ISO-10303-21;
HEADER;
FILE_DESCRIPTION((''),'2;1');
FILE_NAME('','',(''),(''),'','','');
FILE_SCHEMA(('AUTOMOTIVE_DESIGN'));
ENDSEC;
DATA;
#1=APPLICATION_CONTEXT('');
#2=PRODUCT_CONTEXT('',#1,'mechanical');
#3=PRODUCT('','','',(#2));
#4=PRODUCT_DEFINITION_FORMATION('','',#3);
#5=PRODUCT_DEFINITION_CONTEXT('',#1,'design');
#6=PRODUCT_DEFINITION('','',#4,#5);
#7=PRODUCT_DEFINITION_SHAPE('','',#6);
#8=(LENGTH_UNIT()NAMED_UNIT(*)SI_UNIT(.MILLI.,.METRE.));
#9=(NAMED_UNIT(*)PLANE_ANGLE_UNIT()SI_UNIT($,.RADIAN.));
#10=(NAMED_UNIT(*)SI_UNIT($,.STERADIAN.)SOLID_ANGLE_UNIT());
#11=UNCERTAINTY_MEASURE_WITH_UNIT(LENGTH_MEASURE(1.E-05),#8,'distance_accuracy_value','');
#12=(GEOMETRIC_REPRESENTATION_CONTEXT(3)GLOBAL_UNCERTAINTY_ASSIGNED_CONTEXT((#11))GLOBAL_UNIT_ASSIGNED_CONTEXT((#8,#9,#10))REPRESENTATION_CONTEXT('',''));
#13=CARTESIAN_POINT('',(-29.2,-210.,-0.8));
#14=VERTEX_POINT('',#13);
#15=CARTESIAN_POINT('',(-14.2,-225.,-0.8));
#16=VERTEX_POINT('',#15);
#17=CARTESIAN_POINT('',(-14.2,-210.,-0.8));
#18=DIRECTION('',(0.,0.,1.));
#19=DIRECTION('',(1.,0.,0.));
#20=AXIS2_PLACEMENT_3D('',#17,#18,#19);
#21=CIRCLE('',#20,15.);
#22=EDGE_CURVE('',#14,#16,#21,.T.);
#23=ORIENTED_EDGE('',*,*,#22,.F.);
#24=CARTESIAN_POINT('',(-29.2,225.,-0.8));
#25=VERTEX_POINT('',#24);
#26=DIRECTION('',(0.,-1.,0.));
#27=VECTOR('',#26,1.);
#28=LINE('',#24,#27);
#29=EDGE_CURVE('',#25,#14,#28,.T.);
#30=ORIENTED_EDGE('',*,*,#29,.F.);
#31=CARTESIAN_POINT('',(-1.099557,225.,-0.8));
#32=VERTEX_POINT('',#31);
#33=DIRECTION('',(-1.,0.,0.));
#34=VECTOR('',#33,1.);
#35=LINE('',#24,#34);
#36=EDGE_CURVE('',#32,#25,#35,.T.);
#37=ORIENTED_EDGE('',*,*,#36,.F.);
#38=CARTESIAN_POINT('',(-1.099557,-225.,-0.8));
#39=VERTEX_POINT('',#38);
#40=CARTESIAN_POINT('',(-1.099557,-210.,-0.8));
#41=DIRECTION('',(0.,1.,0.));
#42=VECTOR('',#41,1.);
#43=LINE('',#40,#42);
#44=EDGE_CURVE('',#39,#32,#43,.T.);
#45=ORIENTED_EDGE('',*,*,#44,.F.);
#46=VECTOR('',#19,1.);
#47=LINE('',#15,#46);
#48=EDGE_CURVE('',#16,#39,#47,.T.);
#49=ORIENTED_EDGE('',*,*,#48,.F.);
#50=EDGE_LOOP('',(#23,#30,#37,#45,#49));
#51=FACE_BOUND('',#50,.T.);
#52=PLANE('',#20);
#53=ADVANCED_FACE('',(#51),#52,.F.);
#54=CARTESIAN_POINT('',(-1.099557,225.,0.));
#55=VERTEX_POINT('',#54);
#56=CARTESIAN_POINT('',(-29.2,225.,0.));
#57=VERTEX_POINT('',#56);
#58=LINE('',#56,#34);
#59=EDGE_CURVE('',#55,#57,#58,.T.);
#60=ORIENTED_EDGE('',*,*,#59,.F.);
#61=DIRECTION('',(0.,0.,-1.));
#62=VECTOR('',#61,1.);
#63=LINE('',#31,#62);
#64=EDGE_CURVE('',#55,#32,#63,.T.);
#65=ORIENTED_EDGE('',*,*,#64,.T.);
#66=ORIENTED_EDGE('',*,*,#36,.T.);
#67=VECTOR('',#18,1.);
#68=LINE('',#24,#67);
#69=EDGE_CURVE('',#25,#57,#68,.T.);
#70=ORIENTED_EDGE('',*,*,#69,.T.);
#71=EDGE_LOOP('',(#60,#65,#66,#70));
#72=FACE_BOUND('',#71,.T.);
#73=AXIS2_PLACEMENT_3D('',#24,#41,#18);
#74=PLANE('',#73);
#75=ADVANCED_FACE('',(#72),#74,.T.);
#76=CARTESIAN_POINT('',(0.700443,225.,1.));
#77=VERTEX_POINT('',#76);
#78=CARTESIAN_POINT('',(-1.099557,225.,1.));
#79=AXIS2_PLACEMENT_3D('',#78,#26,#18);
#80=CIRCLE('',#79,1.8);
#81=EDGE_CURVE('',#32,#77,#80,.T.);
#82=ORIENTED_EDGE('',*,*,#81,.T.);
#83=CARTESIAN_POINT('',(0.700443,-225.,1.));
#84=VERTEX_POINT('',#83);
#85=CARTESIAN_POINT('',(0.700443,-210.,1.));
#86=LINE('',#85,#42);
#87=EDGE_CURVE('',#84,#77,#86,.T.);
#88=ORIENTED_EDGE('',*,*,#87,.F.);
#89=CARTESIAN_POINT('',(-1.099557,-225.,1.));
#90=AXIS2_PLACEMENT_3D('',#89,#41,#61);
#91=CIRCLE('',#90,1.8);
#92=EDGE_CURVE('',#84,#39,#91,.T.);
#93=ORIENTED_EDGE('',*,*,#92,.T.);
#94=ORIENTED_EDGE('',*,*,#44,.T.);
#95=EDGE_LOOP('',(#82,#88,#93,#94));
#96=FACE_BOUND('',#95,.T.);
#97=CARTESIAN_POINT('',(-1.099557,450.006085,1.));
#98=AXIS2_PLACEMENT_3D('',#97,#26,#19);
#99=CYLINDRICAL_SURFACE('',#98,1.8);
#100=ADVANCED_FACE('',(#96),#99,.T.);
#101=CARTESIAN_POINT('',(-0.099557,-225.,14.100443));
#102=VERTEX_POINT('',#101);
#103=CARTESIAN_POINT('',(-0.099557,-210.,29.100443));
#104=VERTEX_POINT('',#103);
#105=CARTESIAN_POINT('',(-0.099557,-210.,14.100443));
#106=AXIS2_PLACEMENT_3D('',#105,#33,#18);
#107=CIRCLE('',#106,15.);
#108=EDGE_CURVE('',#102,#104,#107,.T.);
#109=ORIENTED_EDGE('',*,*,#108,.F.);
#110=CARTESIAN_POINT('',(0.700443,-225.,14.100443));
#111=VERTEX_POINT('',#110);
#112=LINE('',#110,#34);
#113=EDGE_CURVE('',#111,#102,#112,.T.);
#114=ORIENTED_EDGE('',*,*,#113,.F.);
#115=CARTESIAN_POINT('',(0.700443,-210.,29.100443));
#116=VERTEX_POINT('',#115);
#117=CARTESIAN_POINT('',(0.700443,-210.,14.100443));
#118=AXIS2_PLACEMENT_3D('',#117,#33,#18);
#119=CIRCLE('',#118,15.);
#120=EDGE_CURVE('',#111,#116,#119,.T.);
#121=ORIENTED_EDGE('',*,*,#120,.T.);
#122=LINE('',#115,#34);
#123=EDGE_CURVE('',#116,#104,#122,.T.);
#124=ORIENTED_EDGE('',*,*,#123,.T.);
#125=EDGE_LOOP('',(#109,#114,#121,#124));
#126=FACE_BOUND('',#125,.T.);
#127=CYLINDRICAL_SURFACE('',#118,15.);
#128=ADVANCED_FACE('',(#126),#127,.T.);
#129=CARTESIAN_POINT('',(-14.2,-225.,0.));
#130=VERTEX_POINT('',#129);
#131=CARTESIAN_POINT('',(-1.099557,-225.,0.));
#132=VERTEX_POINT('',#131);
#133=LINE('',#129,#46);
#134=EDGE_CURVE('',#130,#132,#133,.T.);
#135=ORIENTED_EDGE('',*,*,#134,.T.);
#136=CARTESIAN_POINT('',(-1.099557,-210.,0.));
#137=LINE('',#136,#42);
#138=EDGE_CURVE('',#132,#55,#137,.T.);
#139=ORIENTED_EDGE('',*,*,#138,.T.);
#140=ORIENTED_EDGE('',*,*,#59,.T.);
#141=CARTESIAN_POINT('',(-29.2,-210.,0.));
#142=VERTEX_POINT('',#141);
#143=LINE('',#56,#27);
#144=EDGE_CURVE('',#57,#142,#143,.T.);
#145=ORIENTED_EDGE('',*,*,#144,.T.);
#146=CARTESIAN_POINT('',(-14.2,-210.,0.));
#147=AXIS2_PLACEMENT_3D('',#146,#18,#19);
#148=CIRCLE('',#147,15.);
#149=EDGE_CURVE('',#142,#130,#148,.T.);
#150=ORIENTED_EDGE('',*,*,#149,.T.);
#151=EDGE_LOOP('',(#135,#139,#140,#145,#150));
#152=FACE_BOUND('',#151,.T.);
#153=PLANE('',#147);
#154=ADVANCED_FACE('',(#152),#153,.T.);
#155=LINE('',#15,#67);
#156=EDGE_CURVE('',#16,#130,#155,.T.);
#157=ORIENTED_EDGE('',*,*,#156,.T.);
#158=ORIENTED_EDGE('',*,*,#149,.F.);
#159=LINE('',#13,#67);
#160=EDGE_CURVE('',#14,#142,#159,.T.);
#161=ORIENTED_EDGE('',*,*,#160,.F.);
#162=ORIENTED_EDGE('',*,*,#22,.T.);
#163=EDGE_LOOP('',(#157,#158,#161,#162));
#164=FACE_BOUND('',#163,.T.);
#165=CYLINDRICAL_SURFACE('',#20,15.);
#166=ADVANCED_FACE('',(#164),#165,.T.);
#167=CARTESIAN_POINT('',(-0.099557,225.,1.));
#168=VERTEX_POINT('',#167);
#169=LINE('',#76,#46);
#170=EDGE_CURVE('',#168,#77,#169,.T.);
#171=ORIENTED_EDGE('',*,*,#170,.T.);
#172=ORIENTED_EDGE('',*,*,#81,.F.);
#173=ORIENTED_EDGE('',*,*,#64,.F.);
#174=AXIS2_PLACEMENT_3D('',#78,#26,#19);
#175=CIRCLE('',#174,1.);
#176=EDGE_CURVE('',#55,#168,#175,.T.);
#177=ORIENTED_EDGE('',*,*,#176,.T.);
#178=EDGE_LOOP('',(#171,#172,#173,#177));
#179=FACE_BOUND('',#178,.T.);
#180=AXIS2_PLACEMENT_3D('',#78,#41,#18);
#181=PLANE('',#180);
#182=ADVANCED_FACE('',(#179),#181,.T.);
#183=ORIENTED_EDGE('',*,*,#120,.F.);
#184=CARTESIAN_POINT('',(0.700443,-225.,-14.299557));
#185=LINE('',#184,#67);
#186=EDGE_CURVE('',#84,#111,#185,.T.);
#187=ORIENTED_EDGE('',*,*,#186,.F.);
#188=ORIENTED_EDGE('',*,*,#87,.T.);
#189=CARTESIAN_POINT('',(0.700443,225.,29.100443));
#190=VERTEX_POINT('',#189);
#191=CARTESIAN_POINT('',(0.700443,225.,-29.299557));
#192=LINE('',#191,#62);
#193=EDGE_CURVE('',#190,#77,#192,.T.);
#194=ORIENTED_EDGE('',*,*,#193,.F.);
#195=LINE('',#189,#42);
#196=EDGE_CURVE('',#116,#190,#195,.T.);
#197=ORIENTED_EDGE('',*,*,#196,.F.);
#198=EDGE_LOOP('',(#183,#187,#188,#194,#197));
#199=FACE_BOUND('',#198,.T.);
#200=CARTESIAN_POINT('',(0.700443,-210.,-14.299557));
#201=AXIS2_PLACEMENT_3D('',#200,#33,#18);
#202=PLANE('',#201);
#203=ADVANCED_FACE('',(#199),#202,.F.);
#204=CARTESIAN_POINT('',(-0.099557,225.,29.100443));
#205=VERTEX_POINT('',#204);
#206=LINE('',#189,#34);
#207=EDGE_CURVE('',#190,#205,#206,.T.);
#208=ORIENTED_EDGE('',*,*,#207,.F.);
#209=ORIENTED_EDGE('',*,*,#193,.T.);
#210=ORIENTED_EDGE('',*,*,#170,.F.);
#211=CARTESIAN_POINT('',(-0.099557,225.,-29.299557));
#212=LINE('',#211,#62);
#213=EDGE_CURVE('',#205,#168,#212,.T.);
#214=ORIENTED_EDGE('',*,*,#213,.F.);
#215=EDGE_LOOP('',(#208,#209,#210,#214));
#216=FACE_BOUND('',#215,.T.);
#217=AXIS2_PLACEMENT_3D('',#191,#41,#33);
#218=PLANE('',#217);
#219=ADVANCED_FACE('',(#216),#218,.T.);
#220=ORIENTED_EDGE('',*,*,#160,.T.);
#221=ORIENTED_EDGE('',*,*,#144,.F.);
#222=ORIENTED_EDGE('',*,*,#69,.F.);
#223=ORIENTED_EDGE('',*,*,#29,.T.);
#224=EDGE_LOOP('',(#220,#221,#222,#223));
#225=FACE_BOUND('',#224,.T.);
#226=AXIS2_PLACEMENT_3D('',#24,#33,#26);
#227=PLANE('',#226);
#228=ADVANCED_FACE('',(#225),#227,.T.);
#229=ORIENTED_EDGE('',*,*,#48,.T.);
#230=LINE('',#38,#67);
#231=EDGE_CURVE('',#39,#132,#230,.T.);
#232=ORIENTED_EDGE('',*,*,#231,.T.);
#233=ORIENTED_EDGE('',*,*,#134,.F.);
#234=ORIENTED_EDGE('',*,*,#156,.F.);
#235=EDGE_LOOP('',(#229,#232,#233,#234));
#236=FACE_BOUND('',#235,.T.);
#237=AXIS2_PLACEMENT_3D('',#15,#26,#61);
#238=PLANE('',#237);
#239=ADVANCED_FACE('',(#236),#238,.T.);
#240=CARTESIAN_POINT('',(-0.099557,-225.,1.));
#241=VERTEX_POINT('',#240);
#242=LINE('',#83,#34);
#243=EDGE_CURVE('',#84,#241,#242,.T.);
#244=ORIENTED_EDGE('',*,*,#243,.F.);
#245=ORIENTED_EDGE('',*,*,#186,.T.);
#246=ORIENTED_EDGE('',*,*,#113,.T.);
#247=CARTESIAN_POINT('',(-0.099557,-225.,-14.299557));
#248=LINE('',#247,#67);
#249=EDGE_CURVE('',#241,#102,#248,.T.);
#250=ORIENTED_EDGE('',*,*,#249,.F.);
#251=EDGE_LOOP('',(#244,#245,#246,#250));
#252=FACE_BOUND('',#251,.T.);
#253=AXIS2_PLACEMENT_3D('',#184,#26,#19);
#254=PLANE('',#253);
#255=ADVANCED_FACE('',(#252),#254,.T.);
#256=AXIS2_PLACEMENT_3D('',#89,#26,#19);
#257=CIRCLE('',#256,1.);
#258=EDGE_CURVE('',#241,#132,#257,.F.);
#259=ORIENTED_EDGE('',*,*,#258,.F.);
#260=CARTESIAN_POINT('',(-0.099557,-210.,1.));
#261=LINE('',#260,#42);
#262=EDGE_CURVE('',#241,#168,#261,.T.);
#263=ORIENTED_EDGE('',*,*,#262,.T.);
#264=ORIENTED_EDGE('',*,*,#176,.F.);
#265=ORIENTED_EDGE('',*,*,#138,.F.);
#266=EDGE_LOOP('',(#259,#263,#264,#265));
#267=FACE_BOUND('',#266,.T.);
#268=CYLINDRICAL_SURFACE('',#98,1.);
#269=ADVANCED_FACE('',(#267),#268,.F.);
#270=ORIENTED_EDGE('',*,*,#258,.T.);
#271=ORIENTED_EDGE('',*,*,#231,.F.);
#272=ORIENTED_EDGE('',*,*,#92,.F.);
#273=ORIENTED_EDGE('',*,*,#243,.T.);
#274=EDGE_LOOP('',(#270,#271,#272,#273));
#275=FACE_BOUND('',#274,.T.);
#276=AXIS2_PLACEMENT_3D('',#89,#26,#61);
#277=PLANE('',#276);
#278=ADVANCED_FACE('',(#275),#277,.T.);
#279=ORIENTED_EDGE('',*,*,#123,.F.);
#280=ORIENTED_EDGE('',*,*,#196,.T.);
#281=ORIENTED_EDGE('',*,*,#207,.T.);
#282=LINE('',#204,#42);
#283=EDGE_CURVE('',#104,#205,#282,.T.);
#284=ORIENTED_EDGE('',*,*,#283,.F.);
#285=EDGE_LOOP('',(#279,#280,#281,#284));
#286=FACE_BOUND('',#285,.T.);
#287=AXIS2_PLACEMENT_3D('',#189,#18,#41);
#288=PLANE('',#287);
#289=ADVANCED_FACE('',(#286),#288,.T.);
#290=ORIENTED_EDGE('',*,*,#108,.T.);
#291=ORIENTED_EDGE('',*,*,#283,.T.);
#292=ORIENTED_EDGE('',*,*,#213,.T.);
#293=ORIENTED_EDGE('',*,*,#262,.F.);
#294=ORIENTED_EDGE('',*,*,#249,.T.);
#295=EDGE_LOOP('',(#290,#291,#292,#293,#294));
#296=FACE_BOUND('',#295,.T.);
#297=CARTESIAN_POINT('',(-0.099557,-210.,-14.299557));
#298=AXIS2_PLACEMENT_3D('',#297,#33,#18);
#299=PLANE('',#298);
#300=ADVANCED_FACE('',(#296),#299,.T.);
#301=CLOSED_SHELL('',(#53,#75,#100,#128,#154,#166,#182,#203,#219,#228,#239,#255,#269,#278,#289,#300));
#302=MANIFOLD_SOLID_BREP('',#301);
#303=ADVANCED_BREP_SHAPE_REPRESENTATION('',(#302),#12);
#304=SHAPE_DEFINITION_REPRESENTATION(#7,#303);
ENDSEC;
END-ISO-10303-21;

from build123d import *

# Parameters (mm, degrees)
BASE_FLANGE1_DEPTH     = 0.8
SKETCHED_START         = -225
SKETCHED_BEND1_DEPTH   = 450
SKETCHED_BEND1_2_DEPTH = 450
SKETCHED_START_2       = -14.2
SKETCHED_BEND1_3_DEPTH = 16.2


with BuildPart() as part:
    # Base-Flange1: sheet metal written as solids
    # Sketch1 → Base-Flange1 (new body)
    with BuildSketch(Plane.XY):
        with BuildLine():
            Line((-29.2, 225), (29.2, 225))
            Line((29.2, 225), (29.2, -210))
            ThreePointArc((29.2, -210), (24.806601718, -220.606601718), (14.2, -225))
            Line((14.2, -225), (-14.2, -225))
            ThreePointArc((-14.2, -225), (-24.806601718, -220.606601718), (-29.2, -210))
            Line((-29.2, -210), (-29.2, 225))
        make_face()
    extrude(amount=-BASE_FLANGE1_DEPTH)

    # Sketched Bend1: read off the stored shape, not the designer's step
    # Sketched Bend1 outline → Sketched Bend1 (cut)
    with BuildSketch(Plane(origin=(0, 0, 0), x_dir=(1, 0, 0), z_dir=(0, 1, 0)).offset(SKETCHED_START)):
        with BuildLine():
            ThreePointArc((-1.099557429, 0.8), (-0.251029292, 0.587450787), (0.397105525, 0))
            Line((0.397105525, 0), (29.2, 0))
            Line((29.2, 0), (29.2, 0.8))
            Line((29.2, 0.8), (-1.099557429, 0.8))
        make_face()
    extrude(amount=SKETCHED_BEND1_DEPTH, mode=Mode.SUBTRACT)

    # Sketched Bend1 2 outline → Sketched Bend1 2 (add)
    with BuildSketch(Plane(origin=(0, 0, 0), x_dir=(1, 0, 0), z_dir=(0, 1, 0)).offset(SKETCHED_START)):
        with BuildLine():
            Line((0.700442571, -29.100442571), (0.700442571, -1))
            ThreePointArc((0.700442571, -1), (0.622939787, -0.477502784), (0.397105525, 0))
            Line((0.397105525, 0), (-1.099557429, 0))
            ThreePointArc((-1.099557429, 0), (-0.392450648, -0.292893219), (-0.099557429, -1))
            Line((-0.099557429, -1), (-0.099557429, -29.100442571))
            Line((-0.099557429, -29.100442571), (0.700442571, -29.100442571))
        make_face()
    extrude(amount=SKETCHED_BEND1_2_DEPTH)

    # Sketched Bend1 3 outline → Sketched Bend1 3 (cut)
    with BuildSketch(Plane.YZ.offset(SKETCHED_START_2)):
        with BuildLine():
            Line((-225, 29.100442571), (-225, 14.100442571))
            ThreePointArc((-225, 14.100442571), (-220.606601718, 24.707044289), (-210, 29.100442571))
            Line((-210, 29.100442571), (-225, 29.100442571))
        make_face()
    extrude(amount=SKETCHED_BEND1_3_DEPTH, mode=Mode.SUBTRACT)


solid = part.part
